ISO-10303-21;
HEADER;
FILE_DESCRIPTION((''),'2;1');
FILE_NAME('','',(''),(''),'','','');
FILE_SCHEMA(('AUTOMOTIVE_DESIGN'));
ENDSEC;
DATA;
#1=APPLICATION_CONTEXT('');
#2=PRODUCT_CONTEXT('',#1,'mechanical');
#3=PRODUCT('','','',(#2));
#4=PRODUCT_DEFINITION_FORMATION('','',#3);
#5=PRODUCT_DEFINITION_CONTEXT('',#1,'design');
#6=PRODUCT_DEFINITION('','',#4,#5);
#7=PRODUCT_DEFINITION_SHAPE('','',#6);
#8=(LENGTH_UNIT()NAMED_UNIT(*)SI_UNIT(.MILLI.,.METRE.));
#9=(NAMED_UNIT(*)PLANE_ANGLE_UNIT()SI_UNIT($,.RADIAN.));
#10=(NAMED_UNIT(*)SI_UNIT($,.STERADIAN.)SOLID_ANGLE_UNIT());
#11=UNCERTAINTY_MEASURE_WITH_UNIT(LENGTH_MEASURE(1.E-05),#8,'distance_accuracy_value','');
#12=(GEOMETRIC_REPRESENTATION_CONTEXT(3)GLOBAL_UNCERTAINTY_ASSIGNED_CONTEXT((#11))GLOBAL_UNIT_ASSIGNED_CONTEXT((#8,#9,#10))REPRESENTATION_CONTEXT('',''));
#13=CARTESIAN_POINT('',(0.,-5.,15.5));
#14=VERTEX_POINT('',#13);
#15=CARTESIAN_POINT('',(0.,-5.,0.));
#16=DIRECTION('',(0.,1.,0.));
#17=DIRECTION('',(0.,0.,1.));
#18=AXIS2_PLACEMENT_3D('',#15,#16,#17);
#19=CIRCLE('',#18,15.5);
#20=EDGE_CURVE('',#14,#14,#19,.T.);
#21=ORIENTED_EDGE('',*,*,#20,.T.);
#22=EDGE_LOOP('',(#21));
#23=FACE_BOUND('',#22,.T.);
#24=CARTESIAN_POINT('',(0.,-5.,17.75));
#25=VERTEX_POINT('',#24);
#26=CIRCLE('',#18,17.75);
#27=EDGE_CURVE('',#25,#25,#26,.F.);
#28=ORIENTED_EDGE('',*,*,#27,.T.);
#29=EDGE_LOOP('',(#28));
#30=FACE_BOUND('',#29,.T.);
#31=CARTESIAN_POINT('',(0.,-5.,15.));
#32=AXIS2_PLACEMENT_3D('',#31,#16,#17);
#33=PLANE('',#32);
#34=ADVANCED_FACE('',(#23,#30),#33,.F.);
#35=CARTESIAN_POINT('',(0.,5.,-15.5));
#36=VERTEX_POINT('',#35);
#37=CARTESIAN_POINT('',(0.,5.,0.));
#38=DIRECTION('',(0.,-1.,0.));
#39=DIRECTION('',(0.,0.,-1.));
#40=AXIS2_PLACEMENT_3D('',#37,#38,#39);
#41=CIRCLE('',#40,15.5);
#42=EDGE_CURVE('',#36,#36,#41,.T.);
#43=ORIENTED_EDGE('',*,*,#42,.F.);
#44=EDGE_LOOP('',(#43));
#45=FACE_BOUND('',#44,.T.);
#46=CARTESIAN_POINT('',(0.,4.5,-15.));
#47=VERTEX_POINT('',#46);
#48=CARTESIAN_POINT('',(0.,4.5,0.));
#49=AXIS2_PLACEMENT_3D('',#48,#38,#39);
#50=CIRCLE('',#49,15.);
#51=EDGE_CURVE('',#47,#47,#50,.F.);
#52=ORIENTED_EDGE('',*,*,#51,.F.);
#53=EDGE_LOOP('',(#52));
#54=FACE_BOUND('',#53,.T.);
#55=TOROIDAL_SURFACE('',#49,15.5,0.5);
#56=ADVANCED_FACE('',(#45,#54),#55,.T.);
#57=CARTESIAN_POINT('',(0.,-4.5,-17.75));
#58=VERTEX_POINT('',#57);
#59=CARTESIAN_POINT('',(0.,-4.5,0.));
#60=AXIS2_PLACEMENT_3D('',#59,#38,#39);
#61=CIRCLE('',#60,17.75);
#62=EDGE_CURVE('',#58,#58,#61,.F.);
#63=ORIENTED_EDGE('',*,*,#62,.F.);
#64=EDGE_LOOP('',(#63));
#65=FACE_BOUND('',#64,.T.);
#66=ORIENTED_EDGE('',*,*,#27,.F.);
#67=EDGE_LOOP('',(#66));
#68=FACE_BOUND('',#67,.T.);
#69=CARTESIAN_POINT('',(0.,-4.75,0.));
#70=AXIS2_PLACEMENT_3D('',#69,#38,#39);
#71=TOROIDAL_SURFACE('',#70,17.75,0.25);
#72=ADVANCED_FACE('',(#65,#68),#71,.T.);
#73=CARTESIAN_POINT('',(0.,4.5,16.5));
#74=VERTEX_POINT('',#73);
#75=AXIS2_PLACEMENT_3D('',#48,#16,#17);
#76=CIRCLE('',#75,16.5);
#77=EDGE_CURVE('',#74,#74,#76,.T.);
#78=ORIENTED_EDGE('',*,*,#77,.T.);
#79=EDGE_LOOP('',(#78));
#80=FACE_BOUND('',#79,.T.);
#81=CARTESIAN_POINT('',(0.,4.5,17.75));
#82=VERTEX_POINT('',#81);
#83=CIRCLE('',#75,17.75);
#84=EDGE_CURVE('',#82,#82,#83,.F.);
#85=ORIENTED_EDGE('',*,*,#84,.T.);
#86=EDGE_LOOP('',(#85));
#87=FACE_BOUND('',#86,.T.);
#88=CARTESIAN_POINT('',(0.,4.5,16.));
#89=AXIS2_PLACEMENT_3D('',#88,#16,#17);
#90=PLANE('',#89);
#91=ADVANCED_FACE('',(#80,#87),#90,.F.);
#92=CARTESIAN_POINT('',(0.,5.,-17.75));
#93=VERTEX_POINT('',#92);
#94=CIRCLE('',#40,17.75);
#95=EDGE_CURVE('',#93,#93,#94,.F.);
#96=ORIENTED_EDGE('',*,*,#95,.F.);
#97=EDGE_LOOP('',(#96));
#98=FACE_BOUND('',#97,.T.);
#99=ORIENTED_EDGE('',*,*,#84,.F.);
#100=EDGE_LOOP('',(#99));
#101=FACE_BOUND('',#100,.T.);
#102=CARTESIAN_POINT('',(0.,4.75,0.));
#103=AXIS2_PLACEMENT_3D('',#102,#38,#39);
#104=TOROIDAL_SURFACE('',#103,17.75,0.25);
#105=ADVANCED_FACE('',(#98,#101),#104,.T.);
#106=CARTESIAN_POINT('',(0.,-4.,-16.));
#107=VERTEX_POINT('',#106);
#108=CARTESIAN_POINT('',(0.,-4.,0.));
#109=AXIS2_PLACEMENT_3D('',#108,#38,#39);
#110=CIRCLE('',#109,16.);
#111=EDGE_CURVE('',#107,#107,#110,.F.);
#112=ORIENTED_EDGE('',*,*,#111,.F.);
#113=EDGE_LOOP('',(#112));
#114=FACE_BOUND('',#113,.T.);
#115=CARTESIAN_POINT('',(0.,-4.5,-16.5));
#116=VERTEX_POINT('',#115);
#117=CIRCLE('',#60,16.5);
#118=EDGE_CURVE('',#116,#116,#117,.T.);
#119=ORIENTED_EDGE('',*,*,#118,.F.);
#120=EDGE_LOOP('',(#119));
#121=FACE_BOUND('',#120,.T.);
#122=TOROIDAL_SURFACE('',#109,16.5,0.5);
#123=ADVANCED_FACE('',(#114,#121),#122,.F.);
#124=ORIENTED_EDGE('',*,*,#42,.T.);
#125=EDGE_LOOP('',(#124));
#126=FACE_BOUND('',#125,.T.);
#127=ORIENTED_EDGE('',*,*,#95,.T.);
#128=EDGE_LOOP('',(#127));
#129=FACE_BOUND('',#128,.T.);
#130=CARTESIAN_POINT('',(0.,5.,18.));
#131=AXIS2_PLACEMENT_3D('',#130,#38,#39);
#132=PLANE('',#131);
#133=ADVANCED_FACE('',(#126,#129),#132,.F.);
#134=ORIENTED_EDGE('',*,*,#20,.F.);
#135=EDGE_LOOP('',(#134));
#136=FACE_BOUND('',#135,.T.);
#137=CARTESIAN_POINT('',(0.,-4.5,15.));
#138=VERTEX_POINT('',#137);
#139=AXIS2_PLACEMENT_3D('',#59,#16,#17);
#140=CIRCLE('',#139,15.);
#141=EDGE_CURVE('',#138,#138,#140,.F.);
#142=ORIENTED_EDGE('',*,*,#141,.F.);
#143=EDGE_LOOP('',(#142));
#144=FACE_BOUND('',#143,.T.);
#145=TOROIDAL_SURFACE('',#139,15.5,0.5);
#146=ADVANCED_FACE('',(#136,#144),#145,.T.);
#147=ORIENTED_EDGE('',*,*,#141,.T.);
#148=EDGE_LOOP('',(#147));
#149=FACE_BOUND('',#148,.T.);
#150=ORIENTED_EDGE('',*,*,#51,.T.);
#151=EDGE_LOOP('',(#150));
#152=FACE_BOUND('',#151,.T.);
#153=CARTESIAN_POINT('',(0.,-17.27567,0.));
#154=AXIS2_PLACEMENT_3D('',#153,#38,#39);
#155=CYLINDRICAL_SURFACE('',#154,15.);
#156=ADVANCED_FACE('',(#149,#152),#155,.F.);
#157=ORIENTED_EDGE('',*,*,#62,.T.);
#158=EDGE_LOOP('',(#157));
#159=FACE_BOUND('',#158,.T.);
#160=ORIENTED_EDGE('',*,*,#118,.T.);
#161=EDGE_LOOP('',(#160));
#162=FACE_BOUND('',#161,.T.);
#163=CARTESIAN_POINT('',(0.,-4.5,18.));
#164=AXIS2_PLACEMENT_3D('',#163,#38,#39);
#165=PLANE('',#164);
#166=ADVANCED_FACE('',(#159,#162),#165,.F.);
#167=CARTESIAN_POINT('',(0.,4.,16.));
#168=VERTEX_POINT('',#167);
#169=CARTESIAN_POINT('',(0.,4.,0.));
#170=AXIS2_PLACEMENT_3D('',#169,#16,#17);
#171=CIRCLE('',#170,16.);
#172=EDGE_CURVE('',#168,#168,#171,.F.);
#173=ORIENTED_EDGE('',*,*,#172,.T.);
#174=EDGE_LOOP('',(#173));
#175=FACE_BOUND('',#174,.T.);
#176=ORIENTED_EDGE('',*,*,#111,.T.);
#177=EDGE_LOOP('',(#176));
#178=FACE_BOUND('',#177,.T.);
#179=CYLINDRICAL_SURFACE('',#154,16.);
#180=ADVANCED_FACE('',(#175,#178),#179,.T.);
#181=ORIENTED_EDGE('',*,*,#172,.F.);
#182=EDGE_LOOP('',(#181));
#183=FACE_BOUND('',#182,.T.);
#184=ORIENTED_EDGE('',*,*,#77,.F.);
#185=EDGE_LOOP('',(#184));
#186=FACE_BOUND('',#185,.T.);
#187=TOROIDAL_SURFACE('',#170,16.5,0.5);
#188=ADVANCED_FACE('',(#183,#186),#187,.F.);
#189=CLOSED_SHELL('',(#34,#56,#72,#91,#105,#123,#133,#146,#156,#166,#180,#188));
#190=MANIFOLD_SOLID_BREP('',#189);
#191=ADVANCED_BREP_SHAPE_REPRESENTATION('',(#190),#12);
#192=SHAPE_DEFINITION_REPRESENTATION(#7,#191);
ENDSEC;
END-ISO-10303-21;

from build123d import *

# Parameters (mm, degrees)
FILLET1_R = 0.5
FILLET2_R = 0.25
FILLET3_R = 0.25


with BuildPart() as part:
    # Sketch2 → Revolve1 (revolve)
    with BuildSketch(Plane.YZ, mode=Mode.PRIVATE) as revolve1_sk:
        Polygon((-5, 15), (-5, 18), (-4.5, 18), (-4.5, 16), (4.5, 16), (4.5, 18), (5, 18), (5, 15), align=None)
    revolve(revolve1_sk.sketch.rotate(Axis((0, -17.275669785, 0), (0, 1, 0)), 180), axis=Axis((0, -17.275669785, 0), (0, 1, 0)))

    # Fillet1
    fillet1_edges = [part.edges().sort_by_distance(p)[0] for p in [
        (0, -5, 15),
        (0, 5, 15),
        (0, 4.5, 16),
        (0, -4.5, 16),
    ]]
    fillet(fillet1_edges, radius=FILLET1_R)

    # Fillet2
    fillet2_edges = [part.edges().sort_by_distance(p)[0] for p in [
        (0, 5, 18),
        (0, 4.5, 18),
    ]]
    fillet(fillet2_edges, radius=FILLET2_R - 0.0001)  # a hair under: the kernel refuses the full size

    # Fillet3
    fillet3_edges = [part.edges().sort_by_distance(p)[0] for p in [
        (0, -4.5, 18),
        (0, -5, 18),
    ]]
    fillet(fillet3_edges, radius=FILLET3_R - 0.0001)  # a hair under: the kernel refuses the full size


solid = part.part
